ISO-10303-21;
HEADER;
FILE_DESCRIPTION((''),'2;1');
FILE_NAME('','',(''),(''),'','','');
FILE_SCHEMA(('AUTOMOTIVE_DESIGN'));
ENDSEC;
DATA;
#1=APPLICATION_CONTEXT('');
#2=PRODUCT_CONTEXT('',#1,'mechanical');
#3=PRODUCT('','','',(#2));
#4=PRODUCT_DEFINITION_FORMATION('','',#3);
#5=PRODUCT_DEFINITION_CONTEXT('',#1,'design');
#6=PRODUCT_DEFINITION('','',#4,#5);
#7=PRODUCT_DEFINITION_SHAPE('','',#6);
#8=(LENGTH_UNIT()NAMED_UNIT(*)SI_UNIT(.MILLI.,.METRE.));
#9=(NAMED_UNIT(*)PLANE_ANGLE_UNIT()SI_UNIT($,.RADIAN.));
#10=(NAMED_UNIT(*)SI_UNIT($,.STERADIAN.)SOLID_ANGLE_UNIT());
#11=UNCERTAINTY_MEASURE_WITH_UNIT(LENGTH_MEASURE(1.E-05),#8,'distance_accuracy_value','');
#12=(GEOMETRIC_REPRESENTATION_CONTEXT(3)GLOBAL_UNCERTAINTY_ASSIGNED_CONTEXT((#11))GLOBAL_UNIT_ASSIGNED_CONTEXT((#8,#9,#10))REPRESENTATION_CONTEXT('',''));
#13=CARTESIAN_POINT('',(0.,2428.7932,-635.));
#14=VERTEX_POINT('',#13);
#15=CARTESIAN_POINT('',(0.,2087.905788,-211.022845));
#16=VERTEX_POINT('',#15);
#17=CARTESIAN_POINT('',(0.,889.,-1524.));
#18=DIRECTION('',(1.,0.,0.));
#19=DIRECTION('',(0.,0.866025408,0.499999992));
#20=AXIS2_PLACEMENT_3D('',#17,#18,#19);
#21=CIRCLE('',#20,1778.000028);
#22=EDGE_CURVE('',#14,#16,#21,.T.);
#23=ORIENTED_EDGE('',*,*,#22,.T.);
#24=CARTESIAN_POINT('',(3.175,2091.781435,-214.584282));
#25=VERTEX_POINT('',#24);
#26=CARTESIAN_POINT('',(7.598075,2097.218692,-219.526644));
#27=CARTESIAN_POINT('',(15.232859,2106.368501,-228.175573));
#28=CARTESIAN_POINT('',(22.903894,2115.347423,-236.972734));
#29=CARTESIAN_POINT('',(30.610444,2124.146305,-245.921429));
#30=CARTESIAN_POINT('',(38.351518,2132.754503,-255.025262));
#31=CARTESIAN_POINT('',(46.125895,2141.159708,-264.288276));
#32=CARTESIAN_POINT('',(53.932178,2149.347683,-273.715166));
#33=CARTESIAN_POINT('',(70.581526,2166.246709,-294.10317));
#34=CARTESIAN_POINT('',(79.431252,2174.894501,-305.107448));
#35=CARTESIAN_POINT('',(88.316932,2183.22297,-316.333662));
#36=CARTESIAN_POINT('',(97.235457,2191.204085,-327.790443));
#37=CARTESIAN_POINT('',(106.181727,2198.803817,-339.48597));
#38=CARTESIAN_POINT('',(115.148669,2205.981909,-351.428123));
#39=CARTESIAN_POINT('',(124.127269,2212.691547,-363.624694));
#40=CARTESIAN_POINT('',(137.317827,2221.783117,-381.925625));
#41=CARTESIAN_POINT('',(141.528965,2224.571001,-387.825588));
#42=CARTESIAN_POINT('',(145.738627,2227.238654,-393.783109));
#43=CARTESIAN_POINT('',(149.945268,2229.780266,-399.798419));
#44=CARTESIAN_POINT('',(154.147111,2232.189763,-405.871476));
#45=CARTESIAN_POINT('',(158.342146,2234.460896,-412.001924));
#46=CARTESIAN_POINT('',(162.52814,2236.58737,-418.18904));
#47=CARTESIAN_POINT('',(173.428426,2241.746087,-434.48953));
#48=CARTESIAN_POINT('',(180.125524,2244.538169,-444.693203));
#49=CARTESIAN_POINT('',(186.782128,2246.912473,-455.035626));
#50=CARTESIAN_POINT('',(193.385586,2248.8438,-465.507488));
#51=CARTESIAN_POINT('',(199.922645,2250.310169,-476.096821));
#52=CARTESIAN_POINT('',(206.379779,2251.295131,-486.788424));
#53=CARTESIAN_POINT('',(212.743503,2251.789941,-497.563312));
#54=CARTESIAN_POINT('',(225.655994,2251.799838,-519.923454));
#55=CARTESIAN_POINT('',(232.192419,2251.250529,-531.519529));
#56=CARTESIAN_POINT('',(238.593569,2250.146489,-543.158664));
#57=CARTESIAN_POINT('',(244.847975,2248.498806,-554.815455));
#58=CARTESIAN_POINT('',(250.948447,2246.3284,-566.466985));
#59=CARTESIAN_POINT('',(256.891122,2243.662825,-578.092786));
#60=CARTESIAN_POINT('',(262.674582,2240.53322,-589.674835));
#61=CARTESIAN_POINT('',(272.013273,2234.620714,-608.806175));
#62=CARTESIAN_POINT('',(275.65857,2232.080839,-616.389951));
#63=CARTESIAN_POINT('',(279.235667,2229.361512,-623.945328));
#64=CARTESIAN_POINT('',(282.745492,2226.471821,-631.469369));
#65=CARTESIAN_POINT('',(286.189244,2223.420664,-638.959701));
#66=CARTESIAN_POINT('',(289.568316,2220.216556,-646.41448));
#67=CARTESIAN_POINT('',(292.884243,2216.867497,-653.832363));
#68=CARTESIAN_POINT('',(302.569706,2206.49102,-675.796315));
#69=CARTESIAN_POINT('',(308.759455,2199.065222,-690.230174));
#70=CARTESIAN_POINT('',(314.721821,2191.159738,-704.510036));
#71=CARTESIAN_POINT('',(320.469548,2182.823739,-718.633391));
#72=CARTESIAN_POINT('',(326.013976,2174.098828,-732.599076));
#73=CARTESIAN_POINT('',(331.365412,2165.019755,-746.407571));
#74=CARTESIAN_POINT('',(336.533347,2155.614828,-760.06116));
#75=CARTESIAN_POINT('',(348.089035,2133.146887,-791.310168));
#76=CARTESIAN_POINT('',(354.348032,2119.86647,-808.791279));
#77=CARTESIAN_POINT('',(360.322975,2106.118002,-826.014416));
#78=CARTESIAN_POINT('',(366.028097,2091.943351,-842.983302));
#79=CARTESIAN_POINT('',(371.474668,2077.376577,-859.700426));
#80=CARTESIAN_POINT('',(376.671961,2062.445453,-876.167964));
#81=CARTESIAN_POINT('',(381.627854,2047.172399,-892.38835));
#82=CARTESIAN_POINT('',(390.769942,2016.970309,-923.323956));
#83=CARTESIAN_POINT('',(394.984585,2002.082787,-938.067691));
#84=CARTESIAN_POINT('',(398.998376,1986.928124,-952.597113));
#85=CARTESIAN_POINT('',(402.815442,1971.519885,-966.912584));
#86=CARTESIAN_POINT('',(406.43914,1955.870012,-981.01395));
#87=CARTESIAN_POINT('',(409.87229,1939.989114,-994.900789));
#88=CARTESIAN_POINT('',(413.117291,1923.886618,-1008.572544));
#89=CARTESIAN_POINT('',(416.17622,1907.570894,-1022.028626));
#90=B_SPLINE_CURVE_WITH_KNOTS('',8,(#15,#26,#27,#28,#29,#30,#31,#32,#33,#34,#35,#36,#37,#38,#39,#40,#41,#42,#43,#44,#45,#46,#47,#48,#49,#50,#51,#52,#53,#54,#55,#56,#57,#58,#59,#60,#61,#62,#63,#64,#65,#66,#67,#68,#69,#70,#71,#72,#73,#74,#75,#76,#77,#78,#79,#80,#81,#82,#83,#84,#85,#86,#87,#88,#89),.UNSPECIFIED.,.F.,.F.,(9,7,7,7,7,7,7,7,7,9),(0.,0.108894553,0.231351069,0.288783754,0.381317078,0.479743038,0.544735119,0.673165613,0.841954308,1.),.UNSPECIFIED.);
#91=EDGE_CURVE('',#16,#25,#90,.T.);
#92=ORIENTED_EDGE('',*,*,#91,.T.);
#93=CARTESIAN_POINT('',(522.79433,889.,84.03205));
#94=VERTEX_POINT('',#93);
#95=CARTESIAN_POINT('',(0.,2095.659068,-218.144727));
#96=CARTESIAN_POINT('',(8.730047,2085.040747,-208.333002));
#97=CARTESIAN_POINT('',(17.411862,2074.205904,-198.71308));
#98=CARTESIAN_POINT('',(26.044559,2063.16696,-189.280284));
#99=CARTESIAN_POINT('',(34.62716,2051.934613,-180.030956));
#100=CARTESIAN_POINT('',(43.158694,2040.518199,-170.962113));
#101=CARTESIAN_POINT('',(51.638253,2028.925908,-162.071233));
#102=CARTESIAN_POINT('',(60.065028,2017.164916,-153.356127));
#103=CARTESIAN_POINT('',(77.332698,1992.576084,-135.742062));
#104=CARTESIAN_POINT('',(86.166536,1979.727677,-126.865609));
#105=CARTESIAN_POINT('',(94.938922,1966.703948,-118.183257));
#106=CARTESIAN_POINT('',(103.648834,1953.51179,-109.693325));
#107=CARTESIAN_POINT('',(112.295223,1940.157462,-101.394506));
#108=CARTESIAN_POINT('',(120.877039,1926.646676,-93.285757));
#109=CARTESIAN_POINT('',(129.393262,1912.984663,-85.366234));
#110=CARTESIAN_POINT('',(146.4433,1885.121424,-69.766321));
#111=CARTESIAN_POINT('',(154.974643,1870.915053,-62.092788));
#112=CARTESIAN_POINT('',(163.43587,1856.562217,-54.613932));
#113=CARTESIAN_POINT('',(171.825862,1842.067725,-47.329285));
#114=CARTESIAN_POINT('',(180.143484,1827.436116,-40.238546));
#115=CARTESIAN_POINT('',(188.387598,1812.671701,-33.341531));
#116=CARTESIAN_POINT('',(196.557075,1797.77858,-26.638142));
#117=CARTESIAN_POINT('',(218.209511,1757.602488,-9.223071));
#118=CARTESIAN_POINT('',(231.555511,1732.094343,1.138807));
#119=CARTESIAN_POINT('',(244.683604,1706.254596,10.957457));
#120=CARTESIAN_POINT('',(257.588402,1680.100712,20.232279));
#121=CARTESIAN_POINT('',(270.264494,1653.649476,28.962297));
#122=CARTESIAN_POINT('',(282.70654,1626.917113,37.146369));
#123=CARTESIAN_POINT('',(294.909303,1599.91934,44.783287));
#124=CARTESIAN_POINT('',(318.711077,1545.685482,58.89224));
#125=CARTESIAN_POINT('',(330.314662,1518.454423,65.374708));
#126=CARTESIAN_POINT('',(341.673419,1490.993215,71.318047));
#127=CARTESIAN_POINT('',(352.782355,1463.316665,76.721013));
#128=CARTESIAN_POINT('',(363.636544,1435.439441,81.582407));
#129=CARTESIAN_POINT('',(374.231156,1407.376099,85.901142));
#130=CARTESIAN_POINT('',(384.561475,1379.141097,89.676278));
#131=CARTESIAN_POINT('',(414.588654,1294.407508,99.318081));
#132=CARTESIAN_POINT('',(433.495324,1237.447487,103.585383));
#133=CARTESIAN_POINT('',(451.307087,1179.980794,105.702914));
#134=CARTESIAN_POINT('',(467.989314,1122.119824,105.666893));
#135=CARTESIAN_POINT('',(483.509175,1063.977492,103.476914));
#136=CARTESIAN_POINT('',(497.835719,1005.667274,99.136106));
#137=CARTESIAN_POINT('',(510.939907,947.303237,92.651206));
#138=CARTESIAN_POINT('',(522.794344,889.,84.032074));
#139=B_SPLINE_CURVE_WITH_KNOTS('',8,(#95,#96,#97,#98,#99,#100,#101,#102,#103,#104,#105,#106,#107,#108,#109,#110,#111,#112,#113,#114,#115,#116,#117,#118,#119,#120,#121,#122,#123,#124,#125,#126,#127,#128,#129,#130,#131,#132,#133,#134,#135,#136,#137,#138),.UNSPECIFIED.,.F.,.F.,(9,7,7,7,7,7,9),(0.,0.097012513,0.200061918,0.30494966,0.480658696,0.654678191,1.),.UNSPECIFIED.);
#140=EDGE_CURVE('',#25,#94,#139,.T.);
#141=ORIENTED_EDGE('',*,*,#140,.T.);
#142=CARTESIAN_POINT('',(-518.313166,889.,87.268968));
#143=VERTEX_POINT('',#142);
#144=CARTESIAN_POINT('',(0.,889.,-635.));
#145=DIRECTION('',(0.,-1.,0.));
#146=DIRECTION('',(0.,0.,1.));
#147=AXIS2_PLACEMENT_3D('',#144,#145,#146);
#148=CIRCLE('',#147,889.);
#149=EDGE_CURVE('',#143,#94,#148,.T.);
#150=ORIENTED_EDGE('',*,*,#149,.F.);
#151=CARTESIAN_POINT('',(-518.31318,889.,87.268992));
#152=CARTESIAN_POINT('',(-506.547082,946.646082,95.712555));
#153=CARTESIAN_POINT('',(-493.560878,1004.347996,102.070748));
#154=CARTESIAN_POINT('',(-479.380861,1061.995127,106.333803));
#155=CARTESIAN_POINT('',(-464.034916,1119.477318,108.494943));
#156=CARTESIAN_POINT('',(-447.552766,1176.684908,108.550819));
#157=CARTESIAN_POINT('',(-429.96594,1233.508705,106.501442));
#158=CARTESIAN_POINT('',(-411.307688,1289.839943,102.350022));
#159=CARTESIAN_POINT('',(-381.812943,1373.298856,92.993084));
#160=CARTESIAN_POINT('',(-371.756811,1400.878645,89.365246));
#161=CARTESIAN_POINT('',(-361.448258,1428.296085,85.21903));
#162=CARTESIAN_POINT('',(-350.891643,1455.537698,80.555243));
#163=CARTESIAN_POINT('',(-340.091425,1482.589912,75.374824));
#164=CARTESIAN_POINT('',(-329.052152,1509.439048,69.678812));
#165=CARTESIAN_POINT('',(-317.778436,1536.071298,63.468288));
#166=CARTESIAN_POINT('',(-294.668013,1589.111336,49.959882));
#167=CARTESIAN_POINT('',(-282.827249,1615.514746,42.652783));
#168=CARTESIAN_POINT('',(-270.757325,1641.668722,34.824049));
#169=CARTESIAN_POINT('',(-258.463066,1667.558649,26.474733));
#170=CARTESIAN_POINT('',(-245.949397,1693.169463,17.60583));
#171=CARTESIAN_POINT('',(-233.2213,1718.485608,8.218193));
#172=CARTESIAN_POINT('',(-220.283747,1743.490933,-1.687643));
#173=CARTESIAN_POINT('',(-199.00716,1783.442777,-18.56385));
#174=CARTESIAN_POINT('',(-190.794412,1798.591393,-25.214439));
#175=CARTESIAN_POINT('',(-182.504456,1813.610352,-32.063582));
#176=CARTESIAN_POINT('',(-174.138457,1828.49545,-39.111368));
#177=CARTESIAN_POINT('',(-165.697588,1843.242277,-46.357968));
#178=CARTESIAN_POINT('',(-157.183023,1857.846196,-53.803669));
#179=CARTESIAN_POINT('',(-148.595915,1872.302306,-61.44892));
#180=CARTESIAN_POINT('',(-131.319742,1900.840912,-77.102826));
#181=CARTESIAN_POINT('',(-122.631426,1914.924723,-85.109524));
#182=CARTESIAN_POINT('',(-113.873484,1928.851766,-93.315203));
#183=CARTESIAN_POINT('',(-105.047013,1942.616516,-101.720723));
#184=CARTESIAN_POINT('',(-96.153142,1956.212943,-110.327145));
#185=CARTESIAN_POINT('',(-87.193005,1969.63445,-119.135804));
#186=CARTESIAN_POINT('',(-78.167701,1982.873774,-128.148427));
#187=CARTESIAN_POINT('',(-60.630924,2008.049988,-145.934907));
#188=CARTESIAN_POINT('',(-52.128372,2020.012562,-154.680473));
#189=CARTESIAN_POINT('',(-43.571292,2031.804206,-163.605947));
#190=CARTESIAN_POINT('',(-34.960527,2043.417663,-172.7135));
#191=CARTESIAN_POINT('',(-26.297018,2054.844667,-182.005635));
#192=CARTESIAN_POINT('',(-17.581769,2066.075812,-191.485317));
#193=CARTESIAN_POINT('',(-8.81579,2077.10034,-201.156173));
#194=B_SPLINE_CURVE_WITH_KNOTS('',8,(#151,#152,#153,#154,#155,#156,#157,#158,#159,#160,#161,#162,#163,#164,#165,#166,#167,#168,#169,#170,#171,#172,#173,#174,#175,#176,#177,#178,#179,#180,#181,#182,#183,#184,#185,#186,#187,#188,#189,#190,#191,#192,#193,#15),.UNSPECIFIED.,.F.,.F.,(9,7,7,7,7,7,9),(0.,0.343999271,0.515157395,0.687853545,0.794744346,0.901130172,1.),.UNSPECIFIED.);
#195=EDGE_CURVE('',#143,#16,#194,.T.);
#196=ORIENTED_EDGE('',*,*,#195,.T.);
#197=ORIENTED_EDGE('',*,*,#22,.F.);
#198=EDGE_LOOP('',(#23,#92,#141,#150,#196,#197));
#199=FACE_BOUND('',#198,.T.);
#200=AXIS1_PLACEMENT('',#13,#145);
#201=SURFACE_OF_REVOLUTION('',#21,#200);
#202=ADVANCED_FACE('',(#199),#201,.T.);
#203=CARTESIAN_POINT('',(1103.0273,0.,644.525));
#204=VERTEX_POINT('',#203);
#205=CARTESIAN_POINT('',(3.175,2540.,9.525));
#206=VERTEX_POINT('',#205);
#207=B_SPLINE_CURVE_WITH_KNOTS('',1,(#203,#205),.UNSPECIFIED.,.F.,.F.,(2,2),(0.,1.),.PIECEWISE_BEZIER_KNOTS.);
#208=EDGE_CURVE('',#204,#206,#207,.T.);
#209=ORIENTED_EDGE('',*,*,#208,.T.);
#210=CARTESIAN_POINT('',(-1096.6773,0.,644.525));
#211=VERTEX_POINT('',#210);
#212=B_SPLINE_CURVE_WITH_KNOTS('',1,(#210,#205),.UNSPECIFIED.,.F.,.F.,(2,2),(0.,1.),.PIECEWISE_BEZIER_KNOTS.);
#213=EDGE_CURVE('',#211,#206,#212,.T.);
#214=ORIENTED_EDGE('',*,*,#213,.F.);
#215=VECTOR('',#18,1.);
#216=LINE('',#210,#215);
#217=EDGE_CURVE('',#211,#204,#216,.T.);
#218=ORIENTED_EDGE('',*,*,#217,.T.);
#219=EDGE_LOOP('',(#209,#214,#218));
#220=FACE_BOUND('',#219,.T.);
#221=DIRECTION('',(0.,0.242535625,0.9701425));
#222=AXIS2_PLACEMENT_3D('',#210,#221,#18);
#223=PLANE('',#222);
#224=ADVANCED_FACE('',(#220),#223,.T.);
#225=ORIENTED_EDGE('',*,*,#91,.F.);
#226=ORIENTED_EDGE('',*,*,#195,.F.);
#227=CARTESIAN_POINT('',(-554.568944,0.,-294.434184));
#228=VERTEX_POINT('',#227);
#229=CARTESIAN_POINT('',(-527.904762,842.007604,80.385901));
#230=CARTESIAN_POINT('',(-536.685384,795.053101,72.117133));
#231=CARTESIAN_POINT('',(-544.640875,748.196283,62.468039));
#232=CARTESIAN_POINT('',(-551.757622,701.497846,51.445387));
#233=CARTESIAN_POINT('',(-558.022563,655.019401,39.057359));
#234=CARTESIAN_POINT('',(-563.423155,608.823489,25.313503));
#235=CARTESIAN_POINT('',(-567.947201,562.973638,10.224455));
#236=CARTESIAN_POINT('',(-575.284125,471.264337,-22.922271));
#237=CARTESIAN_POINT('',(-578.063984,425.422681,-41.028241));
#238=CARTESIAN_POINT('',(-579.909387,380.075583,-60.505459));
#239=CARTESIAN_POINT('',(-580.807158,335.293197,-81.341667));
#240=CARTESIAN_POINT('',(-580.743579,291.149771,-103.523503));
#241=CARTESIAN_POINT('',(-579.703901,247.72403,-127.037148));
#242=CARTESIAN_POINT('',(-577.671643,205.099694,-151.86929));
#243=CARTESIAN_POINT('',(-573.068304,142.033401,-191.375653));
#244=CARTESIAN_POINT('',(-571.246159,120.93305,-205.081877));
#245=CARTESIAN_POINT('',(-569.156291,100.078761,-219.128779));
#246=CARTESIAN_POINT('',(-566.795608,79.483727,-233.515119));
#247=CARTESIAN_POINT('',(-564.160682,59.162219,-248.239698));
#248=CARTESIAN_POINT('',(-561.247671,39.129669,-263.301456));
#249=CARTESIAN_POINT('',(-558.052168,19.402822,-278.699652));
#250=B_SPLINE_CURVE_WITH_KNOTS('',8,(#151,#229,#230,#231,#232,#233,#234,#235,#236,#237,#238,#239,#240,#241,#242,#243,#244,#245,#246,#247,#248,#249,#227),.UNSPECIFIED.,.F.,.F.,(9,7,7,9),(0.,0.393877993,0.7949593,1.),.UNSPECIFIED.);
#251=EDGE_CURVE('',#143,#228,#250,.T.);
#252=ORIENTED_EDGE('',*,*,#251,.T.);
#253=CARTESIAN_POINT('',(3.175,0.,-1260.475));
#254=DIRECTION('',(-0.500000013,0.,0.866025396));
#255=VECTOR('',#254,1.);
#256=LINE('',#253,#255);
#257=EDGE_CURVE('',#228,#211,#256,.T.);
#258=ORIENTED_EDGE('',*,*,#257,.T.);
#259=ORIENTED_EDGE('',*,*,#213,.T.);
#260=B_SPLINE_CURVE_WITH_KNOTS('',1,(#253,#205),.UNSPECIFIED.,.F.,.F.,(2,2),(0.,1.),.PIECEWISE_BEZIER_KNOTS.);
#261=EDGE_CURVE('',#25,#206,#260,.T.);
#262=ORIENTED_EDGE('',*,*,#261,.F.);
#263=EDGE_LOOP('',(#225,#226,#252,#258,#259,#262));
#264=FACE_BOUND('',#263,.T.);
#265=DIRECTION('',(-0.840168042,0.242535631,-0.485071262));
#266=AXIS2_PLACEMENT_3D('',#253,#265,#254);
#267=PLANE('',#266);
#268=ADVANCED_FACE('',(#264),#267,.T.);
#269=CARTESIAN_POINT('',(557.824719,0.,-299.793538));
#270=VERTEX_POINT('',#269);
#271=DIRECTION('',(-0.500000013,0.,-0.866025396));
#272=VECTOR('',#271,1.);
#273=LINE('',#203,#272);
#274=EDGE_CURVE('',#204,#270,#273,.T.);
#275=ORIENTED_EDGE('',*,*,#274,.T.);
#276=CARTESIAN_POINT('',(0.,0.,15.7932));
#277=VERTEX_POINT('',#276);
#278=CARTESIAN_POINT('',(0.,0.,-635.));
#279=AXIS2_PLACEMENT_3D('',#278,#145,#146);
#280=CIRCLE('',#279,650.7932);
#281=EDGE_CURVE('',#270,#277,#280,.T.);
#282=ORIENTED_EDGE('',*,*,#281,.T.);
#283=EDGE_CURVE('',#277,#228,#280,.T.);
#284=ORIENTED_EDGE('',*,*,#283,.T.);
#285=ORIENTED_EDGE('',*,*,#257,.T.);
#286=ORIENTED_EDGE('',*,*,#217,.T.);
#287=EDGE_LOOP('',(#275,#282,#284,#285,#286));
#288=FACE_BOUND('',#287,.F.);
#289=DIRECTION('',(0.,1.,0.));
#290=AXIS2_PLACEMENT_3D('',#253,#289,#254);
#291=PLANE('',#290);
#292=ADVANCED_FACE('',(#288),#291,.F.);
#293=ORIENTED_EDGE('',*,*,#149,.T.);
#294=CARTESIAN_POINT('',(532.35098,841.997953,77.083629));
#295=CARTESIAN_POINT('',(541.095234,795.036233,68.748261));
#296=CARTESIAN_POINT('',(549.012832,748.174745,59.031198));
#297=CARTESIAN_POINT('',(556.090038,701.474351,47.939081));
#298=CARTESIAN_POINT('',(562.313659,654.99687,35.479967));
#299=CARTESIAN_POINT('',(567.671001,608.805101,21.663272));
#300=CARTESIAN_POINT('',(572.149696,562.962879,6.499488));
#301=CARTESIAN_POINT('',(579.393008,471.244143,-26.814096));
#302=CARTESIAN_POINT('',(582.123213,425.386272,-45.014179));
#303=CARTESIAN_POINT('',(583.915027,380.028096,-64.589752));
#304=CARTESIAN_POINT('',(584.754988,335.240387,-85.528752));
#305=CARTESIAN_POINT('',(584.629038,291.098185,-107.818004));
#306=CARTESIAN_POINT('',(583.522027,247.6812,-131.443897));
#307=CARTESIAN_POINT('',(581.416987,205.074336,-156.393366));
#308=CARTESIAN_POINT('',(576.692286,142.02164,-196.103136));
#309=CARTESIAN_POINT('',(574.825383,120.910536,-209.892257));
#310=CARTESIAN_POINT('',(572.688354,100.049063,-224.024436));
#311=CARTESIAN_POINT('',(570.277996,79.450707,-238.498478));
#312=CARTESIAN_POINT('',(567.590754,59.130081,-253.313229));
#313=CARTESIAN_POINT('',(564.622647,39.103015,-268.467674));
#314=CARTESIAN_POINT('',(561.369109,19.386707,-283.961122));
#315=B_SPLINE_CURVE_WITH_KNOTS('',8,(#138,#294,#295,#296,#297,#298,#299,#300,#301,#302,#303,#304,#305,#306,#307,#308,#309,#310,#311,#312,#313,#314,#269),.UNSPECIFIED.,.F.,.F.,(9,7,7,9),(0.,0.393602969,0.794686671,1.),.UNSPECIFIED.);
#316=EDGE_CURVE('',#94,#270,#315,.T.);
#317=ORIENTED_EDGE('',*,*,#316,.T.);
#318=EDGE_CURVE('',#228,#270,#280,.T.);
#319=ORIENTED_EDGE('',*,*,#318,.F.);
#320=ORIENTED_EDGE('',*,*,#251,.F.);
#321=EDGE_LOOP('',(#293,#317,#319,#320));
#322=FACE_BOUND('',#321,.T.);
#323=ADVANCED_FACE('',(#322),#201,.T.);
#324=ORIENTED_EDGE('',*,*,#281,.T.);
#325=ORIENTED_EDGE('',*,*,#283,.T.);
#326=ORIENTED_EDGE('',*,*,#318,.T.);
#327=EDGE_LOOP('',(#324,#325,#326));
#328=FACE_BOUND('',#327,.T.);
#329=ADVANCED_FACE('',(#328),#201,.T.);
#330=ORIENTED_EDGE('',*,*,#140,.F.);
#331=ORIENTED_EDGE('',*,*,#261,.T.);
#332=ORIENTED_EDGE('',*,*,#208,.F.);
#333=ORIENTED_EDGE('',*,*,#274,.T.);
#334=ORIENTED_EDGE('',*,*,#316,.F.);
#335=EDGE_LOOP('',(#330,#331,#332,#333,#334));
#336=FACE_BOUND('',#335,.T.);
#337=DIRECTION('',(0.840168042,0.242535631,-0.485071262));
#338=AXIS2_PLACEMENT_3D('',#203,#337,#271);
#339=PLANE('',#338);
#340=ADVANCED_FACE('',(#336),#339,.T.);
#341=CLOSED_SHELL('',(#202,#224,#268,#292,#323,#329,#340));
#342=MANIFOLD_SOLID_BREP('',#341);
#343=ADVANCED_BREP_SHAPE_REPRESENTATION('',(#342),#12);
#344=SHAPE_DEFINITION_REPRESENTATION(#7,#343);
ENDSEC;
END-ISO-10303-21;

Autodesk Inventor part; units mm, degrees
ref_plane "YZ Plane" through (0, 0, 0) normal (1, 0, 0) x (0, 1, 0)
ref_plane "XY Plane" through (0, 0, 0) normal (0, 0, 1) x (1, 0, 0)
sketch "Sketch1" plane through (0, 0, 0) normal (0, 1, 0) x (-1, 0, 0)
  circle A0 centre (-3.175, 9.525) radius 1270
  line L0 (1096.6773, 644.525) -> (-1103.0273, 644.525)
  line L1 (-1103.0273, 644.525) -> (-3.175, -1260.475)
  line L2 (-3.175, -1260.475) -> (1096.6773, 644.525)
  point P0 (0, 0)
ref_plane "Work Plane1" through (0, 2540, 0) normal (0, 1, 0) x (-1, 0, 0)
sketch "Sketch2" plane through (0, 2540, 0) normal (0, 1, 0) x (-1, 0, 0)
  point P0 (0, 0)
  point P1 (-3.175, 9.525)
loft "Loft1" add profiles "Sketch1" section 2 point at (3.175, 2540, 9.525) contours L2 L1 L0
sketch "Sketch3" plane through (0, 0, 0) normal (1, 0, 0) x (0, 1, 0)
  line L0 (889, -635) -> (889, -1888.649)
  line L1 (0, 644.525) -> (0, -1260.475) projected
  line L2 (889, -635) -> (1928.8125, -635)
  line L3 (1928.8125, -635) -> (-149.225, -635)
  line L4 (889, -635) -> (889, 254)
  arc A0 (2428.7932, -635) -> (-650.7932, -635) centre (889, -1524) ccw
  line L5 (2428.7932, -635) -> (-650.7932, -635)
  point P0 (0, 0)
  point P1 (-650.7932, -635)
  point P2 (-149.225, -635)
revolve "Revolution1" add sketch "Sketch3" angle 360 about axis through (0, 2428.7932, -635) along (0, -1, 0)
sketch "Sketch4" plane through (1103.0273, 0, 644.525) normal (0.8401681, 0.2425356, -0.4850713) x (-0.3796283, -0.3757346, -0.8454028)
  point P0 (963.6236, 571.3208)
ref_plane "РабПлоскость3" through (0, 889, -635) normal (0, -1, 0) x (1, 0, 0)
split_face "Разделение1"
properties part number "Деталька 1"
